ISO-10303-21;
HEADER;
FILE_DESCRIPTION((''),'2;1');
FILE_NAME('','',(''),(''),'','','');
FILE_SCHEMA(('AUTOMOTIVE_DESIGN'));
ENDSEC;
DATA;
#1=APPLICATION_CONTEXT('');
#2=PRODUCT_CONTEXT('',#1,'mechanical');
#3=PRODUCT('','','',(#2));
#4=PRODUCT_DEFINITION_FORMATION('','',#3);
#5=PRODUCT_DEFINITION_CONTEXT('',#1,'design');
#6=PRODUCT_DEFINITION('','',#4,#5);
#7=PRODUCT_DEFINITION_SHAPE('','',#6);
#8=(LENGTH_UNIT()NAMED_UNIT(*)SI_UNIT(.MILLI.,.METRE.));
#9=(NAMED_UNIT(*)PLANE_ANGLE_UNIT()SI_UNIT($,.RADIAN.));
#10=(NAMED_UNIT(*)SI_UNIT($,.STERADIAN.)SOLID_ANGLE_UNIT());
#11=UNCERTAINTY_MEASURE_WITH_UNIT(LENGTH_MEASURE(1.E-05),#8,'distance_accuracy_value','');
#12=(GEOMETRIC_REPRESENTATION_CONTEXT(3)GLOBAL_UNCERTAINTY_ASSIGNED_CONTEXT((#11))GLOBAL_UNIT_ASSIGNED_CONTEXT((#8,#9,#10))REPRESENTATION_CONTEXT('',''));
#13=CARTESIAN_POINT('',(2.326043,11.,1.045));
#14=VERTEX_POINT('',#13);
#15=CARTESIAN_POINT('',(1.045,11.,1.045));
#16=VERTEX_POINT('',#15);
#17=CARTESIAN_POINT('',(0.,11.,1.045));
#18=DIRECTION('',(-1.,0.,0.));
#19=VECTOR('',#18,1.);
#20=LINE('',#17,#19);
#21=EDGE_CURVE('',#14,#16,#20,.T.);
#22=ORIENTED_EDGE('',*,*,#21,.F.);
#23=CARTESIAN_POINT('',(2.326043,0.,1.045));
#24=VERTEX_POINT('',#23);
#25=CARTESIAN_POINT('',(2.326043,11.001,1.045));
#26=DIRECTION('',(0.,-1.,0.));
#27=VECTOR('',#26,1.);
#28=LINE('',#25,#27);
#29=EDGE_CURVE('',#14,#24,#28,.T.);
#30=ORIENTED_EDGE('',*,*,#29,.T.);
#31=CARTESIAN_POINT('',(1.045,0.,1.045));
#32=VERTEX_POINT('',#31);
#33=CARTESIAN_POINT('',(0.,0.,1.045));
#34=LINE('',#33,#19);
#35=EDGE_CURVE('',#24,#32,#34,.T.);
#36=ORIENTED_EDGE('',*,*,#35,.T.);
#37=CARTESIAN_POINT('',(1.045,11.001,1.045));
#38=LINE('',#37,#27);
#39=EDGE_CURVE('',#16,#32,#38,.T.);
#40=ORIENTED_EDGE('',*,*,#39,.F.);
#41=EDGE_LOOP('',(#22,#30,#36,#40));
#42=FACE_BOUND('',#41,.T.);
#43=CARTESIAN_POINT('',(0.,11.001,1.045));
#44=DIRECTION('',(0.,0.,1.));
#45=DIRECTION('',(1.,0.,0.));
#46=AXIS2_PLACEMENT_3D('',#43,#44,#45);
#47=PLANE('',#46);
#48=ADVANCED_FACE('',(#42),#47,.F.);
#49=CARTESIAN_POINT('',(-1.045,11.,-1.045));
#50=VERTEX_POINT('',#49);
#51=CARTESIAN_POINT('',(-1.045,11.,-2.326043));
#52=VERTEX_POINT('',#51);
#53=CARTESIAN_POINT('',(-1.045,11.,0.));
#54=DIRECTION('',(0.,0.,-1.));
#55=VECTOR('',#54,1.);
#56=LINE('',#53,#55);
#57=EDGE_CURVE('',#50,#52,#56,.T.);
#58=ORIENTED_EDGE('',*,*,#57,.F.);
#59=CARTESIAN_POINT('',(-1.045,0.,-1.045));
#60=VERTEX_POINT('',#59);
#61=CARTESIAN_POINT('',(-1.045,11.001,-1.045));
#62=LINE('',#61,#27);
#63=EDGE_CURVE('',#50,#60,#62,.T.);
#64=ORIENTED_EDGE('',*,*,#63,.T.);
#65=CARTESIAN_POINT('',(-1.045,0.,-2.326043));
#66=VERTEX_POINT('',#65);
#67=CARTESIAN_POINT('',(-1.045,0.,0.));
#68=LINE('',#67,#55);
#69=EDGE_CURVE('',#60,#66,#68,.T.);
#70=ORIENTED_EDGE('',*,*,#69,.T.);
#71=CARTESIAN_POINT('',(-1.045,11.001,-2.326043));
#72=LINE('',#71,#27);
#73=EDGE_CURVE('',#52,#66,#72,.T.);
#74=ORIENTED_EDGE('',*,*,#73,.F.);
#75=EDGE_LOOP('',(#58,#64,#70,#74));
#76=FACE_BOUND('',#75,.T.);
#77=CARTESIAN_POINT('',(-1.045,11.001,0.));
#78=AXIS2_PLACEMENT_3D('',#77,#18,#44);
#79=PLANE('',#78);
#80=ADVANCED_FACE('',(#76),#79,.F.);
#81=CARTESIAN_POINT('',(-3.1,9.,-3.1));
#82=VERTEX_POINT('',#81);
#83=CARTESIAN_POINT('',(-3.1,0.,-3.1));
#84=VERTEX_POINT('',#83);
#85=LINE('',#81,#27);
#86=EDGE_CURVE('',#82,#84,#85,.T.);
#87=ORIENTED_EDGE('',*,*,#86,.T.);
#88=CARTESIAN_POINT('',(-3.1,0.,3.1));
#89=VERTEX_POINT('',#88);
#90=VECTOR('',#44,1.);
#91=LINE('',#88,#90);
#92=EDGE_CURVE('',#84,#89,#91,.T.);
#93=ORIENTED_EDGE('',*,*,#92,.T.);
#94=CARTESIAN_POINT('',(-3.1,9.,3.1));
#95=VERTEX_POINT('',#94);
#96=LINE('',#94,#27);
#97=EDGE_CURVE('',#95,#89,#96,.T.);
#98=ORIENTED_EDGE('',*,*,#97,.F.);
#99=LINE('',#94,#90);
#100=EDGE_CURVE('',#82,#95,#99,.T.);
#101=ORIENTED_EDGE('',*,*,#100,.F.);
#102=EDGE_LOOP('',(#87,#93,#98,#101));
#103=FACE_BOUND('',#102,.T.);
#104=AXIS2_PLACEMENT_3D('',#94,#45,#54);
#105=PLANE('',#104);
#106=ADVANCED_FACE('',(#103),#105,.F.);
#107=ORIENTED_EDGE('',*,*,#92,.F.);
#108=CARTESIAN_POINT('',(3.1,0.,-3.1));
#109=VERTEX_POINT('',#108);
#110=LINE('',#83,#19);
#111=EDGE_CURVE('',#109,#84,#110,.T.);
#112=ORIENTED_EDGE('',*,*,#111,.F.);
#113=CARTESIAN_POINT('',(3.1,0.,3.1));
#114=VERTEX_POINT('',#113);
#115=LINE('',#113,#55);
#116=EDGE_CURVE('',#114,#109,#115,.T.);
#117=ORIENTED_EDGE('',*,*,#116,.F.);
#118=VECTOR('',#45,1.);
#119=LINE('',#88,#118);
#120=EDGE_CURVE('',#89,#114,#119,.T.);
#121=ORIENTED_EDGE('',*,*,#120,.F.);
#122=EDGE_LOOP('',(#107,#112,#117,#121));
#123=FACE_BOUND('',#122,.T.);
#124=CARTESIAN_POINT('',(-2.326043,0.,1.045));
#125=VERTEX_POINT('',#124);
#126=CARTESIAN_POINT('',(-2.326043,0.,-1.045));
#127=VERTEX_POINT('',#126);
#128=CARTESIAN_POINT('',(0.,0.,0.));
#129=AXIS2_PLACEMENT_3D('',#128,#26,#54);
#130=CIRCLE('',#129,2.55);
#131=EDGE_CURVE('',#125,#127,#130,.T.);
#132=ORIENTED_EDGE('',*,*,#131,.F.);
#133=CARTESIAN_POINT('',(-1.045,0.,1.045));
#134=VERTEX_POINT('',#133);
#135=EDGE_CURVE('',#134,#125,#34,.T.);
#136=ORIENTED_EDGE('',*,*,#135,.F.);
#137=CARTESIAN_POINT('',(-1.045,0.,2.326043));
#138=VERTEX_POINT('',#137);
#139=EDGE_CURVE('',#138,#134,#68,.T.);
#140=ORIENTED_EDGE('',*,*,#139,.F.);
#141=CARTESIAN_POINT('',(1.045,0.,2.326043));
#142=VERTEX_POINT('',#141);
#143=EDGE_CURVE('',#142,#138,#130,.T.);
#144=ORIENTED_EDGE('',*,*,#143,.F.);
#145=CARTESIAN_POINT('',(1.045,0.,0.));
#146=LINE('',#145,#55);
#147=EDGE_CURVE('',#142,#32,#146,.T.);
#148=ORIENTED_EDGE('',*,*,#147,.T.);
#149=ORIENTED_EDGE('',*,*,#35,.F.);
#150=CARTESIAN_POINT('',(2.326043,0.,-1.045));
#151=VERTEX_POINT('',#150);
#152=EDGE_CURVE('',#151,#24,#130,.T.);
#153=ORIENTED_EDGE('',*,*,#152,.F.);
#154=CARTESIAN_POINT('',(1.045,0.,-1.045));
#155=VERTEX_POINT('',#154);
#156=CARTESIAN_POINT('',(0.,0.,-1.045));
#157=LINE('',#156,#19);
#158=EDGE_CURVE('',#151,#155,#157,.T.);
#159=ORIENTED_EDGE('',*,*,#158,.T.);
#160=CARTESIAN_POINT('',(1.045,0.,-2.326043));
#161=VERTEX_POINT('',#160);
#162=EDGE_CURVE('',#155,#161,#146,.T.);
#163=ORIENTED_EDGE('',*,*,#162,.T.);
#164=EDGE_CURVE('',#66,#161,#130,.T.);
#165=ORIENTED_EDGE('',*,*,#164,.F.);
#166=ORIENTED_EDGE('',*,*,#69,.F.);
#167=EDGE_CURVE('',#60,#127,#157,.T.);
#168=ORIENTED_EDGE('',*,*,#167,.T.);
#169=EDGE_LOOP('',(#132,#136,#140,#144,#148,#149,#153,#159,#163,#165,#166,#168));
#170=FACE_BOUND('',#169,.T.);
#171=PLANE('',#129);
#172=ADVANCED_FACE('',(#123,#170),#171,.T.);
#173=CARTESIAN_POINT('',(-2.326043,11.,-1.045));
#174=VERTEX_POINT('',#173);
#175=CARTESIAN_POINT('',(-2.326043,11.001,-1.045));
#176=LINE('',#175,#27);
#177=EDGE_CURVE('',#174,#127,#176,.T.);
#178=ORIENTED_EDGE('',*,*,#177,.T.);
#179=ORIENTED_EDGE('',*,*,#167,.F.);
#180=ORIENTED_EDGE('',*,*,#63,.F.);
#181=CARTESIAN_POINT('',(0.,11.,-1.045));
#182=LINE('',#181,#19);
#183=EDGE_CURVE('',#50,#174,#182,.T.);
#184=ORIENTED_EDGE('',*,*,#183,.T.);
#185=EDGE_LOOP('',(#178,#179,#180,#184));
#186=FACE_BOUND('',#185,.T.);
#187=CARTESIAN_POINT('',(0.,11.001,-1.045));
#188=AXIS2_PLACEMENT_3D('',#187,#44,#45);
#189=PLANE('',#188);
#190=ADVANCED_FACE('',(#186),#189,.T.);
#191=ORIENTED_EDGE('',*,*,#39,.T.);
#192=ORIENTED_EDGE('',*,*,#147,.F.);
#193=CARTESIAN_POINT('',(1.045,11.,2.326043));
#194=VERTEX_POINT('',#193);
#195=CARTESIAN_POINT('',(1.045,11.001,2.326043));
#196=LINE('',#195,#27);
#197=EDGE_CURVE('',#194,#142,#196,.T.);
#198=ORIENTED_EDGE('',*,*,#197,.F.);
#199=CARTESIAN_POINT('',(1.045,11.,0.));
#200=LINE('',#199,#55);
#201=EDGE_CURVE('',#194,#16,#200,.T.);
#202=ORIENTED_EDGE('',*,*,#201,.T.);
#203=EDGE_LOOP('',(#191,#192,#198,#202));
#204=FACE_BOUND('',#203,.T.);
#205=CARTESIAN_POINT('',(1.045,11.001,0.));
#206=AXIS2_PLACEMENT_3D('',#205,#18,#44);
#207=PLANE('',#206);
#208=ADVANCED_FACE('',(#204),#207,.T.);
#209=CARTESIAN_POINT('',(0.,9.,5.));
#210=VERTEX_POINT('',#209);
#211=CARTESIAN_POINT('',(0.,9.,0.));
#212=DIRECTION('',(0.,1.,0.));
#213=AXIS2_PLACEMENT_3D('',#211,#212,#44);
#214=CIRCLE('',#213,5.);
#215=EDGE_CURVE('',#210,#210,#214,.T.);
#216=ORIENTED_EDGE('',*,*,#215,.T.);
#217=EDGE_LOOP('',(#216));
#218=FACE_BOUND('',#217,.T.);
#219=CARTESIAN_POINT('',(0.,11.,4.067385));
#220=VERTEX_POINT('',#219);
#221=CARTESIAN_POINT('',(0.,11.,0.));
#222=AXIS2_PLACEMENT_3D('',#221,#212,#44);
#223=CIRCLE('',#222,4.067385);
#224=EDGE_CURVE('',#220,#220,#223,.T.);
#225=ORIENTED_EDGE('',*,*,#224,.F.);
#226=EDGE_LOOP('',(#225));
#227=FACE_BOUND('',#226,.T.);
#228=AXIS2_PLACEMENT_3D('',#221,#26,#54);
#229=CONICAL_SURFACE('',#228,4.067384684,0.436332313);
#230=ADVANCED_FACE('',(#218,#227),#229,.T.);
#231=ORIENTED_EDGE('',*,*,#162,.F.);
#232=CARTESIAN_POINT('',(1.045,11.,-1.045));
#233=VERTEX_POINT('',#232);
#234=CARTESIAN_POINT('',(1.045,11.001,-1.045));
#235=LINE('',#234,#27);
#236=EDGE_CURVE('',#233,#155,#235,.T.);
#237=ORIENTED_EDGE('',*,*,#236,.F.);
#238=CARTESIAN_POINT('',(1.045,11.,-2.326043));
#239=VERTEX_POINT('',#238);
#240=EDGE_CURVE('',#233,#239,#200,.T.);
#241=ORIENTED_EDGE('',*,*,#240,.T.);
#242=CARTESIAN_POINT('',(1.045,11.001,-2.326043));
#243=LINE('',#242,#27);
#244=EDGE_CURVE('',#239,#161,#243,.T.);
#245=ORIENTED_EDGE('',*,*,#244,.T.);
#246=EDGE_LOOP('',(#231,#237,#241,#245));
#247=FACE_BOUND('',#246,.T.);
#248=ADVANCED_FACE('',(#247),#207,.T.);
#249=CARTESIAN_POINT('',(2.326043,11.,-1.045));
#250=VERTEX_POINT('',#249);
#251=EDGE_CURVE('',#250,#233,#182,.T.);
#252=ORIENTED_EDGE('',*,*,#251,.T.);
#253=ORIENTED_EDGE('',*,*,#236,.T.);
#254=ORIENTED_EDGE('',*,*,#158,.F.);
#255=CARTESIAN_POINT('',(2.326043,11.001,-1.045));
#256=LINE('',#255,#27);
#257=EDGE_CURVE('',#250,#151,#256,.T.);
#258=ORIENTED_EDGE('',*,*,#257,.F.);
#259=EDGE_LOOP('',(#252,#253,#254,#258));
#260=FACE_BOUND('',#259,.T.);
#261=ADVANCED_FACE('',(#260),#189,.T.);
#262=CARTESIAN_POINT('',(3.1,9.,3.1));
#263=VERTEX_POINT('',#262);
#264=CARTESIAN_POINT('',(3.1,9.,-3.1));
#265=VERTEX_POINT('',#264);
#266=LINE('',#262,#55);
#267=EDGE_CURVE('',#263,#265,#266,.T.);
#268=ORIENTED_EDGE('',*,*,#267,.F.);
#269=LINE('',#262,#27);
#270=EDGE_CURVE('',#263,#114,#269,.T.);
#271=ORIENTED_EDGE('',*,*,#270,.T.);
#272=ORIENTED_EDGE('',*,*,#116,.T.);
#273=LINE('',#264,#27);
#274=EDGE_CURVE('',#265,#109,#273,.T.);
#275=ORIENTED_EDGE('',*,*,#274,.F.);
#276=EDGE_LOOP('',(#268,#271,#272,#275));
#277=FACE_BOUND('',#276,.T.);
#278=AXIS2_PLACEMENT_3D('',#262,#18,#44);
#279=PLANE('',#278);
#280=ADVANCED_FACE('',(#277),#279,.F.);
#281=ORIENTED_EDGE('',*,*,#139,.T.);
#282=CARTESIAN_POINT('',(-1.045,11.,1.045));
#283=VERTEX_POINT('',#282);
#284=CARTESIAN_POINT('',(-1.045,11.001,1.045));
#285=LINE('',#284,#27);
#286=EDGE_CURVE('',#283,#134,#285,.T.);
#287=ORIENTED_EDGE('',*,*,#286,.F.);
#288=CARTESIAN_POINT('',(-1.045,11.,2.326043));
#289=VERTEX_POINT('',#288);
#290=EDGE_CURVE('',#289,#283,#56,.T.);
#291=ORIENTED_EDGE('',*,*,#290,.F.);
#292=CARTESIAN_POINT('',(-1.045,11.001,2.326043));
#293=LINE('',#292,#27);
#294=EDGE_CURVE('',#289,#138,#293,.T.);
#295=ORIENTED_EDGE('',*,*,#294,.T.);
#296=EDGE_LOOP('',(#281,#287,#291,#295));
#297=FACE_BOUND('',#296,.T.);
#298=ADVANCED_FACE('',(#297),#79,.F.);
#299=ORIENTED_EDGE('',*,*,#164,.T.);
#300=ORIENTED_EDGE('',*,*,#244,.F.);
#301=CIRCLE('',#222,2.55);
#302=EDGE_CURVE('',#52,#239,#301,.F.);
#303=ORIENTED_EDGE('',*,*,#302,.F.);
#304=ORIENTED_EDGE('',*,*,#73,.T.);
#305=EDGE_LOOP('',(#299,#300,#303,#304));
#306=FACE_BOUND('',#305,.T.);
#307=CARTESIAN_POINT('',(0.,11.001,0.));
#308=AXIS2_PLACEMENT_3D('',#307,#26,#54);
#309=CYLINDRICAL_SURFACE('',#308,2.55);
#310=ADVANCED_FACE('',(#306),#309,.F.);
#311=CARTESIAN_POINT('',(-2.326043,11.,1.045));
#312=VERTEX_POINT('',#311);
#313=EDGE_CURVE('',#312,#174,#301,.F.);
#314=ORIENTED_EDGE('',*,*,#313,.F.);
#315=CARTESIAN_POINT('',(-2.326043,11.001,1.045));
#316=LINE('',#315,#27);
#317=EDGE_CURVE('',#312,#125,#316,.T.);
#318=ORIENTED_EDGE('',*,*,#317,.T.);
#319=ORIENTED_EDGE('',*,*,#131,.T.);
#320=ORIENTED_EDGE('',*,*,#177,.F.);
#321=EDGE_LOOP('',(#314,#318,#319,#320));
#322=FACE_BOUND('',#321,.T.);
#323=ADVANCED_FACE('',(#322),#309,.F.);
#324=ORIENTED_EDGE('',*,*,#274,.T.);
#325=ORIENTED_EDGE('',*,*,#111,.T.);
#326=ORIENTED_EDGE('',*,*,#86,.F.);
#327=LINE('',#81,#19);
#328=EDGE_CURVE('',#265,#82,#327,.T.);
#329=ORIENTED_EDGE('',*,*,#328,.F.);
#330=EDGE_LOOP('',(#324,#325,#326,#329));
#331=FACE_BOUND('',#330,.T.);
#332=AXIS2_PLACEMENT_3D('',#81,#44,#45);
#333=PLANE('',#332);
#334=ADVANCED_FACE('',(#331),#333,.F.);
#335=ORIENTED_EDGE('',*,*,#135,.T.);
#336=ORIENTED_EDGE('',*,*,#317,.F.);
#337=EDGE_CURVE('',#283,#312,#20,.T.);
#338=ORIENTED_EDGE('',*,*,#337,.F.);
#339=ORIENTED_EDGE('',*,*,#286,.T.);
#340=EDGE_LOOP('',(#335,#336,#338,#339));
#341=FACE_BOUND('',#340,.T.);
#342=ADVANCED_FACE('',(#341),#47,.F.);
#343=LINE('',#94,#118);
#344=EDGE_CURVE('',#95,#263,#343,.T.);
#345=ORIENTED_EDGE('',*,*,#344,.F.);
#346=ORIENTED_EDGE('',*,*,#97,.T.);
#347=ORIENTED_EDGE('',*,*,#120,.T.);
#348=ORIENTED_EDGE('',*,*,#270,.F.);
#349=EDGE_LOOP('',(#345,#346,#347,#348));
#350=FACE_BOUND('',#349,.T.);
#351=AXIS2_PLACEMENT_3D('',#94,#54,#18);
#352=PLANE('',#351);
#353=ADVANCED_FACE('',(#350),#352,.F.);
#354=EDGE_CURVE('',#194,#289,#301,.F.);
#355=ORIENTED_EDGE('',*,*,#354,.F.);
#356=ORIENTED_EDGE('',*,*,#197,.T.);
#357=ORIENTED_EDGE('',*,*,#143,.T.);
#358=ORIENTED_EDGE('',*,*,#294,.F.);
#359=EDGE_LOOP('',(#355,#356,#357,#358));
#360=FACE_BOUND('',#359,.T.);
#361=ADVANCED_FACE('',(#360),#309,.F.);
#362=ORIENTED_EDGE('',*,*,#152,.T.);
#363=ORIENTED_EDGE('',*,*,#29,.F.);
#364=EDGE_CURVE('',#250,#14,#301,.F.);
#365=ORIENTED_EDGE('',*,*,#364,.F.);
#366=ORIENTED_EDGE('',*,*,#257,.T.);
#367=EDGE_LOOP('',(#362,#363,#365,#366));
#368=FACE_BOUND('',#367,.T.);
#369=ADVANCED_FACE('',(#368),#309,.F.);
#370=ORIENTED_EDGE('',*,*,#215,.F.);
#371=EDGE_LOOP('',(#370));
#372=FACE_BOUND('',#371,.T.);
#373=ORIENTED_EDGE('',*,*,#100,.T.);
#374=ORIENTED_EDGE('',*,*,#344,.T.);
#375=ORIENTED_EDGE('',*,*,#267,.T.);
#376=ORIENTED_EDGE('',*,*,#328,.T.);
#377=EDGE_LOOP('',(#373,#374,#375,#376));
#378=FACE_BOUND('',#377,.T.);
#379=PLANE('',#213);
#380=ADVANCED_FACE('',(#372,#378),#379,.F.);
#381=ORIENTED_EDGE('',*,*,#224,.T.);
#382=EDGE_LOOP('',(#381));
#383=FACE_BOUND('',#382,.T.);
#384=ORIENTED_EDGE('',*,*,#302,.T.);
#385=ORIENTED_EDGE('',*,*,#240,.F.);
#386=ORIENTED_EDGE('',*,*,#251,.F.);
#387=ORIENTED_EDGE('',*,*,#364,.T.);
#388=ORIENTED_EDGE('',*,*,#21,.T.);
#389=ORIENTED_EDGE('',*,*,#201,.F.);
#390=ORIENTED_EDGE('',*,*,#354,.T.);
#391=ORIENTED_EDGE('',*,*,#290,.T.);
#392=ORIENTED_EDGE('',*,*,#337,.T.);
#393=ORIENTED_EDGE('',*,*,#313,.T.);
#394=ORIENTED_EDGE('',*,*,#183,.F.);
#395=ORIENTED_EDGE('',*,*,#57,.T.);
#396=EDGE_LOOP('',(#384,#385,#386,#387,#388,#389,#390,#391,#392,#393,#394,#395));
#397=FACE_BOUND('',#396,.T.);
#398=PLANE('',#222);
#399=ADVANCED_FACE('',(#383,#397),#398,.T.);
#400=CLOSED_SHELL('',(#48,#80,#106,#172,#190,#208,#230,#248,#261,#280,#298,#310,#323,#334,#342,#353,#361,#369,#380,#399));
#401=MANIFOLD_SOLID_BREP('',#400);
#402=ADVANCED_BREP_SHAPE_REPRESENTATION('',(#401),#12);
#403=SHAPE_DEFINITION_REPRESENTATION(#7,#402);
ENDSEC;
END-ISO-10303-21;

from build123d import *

# Parameters (mm, degrees)
SKETCH1_W           = 6.2
SKETCH1_H           = 6.2
BOSS_EXTRUDE1_DEPTH = 9
SKETCH2_R           = 5
BOSS_EXTRUDE2_DEPTH = 2
CUT_EXTRUDE1_REACH  = 15.077
CHAMFER1_SIZE       = 2
CHAMFER1_SIZE_2     = 0.932615316


with BuildPart() as part:
    # Sketch1 → Boss-Extrude1 (new body)
    with BuildSketch(Plane(origin=(0, 0, 0), x_dir=(1, 0, 0), z_dir=(0, 1, 0))):
        Rectangle(SKETCH1_W, SKETCH1_H)
    extrude(amount=BOSS_EXTRUDE1_DEPTH)

    # Sketch2 → Boss-Extrude2 (add)
    with BuildSketch(Plane(origin=(0, 9, 0), x_dir=(1, 0, 0), z_dir=(0, 1, 0))):
        with Locations(Location((0, 0, 0), (0, 0, 270))):
            Circle(SKETCH2_R)
    extrude(amount=BOSS_EXTRUDE2_DEPTH)

    # Sketch3 → Cut-Extrude1 (cut, up to next)
    with BuildSketch(Plane(origin=(0, 0, 0), x_dir=(-1, 0, 0), z_dir=(0, -1, 0)), mode=Mode.PRIVATE) as cut_extrude1_sk1:
        with BuildLine():
            ThreePointArc((-1.045, -2.326042777), (0, -2.55), (1.045, -2.326042777))
            Line((1.045, -2.326042777), (1.045, -1.045))
            Line((1.045, -1.045), (-1.045, -1.045))
            Line((-1.045, -1.045), (-1.045, -2.326042777))
        make_face()
    cut_extrude1_tool1 = extrude(cut_extrude1_sk1.sketch, amount=-CUT_EXTRUDE1_REACH, mode=Mode.PRIVATE) & part.part
    # Sketch3 → Cut-Extrude1 (cut, up to next)
    with BuildSketch(Plane(origin=(0, 0, 0), x_dir=(-1, 0, 0), z_dir=(0, -1, 0)), mode=Mode.PRIVATE) as cut_extrude1_sk2:
        with BuildLine():
            Line((1.045, 1.045), (1.045, -1.045))
            Line((1.045, -1.045), (2.326042777, -1.045))
            ThreePointArc((2.326042777, -1.045), (2.493382149, -0.534364538), (2.55, 0))
            ThreePointArc((2.55, 0), (2.493382149, 0.534364538), (2.326042777, 1.045))
            Line((2.326042777, 1.045), (1.045, 1.045))
        make_face()
    cut_extrude1_tool2 = extrude(cut_extrude1_sk2.sketch, amount=-CUT_EXTRUDE1_REACH, mode=Mode.PRIVATE) & part.part
    # Sketch3 → Cut-Extrude1 (cut, up to next)
    with BuildSketch(Plane(origin=(0, 0, 0), x_dir=(-1, 0, 0), z_dir=(0, -1, 0)), mode=Mode.PRIVATE) as cut_extrude1_sk3:
        Polygon((-1.045, -1.045), (1.045, -1.045), (1.045, 1.045), align=None)
    cut_extrude1_tool3 = extrude(cut_extrude1_sk3.sketch, amount=-CUT_EXTRUDE1_REACH, mode=Mode.PRIVATE) & part.part
    # Sketch3 → Cut-Extrude1 (cut, up to next)
    with BuildSketch(Plane(origin=(0, 0, 0), x_dir=(-1, 0, 0), z_dir=(0, -1, 0)), mode=Mode.PRIVATE) as cut_extrude1_sk4:
        Polygon((-1.045, -1.045), (1.045, 1.045), (-1.045, 1.045), align=None)
    cut_extrude1_tool4 = extrude(cut_extrude1_sk4.sketch, amount=-CUT_EXTRUDE1_REACH, mode=Mode.PRIVATE) & part.part
    # Sketch3 → Cut-Extrude1 (cut, up to next)
    with BuildSketch(Plane(origin=(0, 0, 0), x_dir=(-1, 0, 0), z_dir=(0, -1, 0)), mode=Mode.PRIVATE) as cut_extrude1_sk5:
        with BuildLine():
            Line((-2.326042777, -1.045), (-1.045, -1.045))
            Line((-1.045, -1.045), (-1.045, 1.045))
            Line((-1.045, 1.045), (-2.326042777, 1.045))
            ThreePointArc((-2.326042777, 1.045), (-2.55, 0), (-2.326042777, -1.045))
        make_face()
    cut_extrude1_tool5 = extrude(cut_extrude1_sk5.sketch, amount=-CUT_EXTRUDE1_REACH, mode=Mode.PRIVATE) & part.part
    # Sketch3 → Cut-Extrude1 (cut, up to next)
    with BuildSketch(Plane(origin=(0, 0, 0), x_dir=(-1, 0, 0), z_dir=(0, -1, 0)), mode=Mode.PRIVATE) as cut_extrude1_sk6:
        with BuildLine():
            Line((-1.045, 1.045), (1.045, 1.045))
            Line((1.045, 1.045), (1.045, 2.326042777))
            ThreePointArc((1.045, 2.326042777), (0, 2.55), (-1.045, 2.326042777))
            Line((-1.045, 2.326042777), (-1.045, 1.045))
        make_face()
    cut_extrude1_tool6 = extrude(cut_extrude1_sk6.sketch, amount=-CUT_EXTRUDE1_REACH, mode=Mode.PRIVATE) & part.part
    add(cut_extrude1_tool1.solids().sort_by_distance((0, 0, 1.762391))[0], mode=Mode.SUBTRACT)
    add(cut_extrude1_tool2.solids().sort_by_distance((-1.762391, 0, 0))[0], mode=Mode.SUBTRACT)
    add(cut_extrude1_tool3.solids().sort_by_distance((-0.348333, 0, 0.348333))[0], mode=Mode.SUBTRACT)
    add(cut_extrude1_tool4.solids().sort_by_distance((0.348333, 0, -0.348333))[0], mode=Mode.SUBTRACT)
    add(cut_extrude1_tool5.solids().sort_by_distance((1.762391, 0, 0))[0], mode=Mode.SUBTRACT)
    add(cut_extrude1_tool6.solids().sort_by_distance((0, 0, -1.762391))[0], mode=Mode.SUBTRACT)

    # Chamfer1
    # the kernel refuses this chamfer: 2, 0.932615316 mm, written as the material it takes off along each edge
    with BuildSketch(Plane(origin=(0, 11, 0), x_dir=(0, 0, 1), z_dir=(-1, 0, 0))) as chamfer1_piece_1:
        Polygon((5, -CHAMFER1_SIZE), (5 - CHAMFER1_SIZE_2, 0), (5, 0), align=None)
    revolve(axis=Axis((0, 11, 0), (0, 1, 0)), mode=Mode.SUBTRACT)


solid = part.part
